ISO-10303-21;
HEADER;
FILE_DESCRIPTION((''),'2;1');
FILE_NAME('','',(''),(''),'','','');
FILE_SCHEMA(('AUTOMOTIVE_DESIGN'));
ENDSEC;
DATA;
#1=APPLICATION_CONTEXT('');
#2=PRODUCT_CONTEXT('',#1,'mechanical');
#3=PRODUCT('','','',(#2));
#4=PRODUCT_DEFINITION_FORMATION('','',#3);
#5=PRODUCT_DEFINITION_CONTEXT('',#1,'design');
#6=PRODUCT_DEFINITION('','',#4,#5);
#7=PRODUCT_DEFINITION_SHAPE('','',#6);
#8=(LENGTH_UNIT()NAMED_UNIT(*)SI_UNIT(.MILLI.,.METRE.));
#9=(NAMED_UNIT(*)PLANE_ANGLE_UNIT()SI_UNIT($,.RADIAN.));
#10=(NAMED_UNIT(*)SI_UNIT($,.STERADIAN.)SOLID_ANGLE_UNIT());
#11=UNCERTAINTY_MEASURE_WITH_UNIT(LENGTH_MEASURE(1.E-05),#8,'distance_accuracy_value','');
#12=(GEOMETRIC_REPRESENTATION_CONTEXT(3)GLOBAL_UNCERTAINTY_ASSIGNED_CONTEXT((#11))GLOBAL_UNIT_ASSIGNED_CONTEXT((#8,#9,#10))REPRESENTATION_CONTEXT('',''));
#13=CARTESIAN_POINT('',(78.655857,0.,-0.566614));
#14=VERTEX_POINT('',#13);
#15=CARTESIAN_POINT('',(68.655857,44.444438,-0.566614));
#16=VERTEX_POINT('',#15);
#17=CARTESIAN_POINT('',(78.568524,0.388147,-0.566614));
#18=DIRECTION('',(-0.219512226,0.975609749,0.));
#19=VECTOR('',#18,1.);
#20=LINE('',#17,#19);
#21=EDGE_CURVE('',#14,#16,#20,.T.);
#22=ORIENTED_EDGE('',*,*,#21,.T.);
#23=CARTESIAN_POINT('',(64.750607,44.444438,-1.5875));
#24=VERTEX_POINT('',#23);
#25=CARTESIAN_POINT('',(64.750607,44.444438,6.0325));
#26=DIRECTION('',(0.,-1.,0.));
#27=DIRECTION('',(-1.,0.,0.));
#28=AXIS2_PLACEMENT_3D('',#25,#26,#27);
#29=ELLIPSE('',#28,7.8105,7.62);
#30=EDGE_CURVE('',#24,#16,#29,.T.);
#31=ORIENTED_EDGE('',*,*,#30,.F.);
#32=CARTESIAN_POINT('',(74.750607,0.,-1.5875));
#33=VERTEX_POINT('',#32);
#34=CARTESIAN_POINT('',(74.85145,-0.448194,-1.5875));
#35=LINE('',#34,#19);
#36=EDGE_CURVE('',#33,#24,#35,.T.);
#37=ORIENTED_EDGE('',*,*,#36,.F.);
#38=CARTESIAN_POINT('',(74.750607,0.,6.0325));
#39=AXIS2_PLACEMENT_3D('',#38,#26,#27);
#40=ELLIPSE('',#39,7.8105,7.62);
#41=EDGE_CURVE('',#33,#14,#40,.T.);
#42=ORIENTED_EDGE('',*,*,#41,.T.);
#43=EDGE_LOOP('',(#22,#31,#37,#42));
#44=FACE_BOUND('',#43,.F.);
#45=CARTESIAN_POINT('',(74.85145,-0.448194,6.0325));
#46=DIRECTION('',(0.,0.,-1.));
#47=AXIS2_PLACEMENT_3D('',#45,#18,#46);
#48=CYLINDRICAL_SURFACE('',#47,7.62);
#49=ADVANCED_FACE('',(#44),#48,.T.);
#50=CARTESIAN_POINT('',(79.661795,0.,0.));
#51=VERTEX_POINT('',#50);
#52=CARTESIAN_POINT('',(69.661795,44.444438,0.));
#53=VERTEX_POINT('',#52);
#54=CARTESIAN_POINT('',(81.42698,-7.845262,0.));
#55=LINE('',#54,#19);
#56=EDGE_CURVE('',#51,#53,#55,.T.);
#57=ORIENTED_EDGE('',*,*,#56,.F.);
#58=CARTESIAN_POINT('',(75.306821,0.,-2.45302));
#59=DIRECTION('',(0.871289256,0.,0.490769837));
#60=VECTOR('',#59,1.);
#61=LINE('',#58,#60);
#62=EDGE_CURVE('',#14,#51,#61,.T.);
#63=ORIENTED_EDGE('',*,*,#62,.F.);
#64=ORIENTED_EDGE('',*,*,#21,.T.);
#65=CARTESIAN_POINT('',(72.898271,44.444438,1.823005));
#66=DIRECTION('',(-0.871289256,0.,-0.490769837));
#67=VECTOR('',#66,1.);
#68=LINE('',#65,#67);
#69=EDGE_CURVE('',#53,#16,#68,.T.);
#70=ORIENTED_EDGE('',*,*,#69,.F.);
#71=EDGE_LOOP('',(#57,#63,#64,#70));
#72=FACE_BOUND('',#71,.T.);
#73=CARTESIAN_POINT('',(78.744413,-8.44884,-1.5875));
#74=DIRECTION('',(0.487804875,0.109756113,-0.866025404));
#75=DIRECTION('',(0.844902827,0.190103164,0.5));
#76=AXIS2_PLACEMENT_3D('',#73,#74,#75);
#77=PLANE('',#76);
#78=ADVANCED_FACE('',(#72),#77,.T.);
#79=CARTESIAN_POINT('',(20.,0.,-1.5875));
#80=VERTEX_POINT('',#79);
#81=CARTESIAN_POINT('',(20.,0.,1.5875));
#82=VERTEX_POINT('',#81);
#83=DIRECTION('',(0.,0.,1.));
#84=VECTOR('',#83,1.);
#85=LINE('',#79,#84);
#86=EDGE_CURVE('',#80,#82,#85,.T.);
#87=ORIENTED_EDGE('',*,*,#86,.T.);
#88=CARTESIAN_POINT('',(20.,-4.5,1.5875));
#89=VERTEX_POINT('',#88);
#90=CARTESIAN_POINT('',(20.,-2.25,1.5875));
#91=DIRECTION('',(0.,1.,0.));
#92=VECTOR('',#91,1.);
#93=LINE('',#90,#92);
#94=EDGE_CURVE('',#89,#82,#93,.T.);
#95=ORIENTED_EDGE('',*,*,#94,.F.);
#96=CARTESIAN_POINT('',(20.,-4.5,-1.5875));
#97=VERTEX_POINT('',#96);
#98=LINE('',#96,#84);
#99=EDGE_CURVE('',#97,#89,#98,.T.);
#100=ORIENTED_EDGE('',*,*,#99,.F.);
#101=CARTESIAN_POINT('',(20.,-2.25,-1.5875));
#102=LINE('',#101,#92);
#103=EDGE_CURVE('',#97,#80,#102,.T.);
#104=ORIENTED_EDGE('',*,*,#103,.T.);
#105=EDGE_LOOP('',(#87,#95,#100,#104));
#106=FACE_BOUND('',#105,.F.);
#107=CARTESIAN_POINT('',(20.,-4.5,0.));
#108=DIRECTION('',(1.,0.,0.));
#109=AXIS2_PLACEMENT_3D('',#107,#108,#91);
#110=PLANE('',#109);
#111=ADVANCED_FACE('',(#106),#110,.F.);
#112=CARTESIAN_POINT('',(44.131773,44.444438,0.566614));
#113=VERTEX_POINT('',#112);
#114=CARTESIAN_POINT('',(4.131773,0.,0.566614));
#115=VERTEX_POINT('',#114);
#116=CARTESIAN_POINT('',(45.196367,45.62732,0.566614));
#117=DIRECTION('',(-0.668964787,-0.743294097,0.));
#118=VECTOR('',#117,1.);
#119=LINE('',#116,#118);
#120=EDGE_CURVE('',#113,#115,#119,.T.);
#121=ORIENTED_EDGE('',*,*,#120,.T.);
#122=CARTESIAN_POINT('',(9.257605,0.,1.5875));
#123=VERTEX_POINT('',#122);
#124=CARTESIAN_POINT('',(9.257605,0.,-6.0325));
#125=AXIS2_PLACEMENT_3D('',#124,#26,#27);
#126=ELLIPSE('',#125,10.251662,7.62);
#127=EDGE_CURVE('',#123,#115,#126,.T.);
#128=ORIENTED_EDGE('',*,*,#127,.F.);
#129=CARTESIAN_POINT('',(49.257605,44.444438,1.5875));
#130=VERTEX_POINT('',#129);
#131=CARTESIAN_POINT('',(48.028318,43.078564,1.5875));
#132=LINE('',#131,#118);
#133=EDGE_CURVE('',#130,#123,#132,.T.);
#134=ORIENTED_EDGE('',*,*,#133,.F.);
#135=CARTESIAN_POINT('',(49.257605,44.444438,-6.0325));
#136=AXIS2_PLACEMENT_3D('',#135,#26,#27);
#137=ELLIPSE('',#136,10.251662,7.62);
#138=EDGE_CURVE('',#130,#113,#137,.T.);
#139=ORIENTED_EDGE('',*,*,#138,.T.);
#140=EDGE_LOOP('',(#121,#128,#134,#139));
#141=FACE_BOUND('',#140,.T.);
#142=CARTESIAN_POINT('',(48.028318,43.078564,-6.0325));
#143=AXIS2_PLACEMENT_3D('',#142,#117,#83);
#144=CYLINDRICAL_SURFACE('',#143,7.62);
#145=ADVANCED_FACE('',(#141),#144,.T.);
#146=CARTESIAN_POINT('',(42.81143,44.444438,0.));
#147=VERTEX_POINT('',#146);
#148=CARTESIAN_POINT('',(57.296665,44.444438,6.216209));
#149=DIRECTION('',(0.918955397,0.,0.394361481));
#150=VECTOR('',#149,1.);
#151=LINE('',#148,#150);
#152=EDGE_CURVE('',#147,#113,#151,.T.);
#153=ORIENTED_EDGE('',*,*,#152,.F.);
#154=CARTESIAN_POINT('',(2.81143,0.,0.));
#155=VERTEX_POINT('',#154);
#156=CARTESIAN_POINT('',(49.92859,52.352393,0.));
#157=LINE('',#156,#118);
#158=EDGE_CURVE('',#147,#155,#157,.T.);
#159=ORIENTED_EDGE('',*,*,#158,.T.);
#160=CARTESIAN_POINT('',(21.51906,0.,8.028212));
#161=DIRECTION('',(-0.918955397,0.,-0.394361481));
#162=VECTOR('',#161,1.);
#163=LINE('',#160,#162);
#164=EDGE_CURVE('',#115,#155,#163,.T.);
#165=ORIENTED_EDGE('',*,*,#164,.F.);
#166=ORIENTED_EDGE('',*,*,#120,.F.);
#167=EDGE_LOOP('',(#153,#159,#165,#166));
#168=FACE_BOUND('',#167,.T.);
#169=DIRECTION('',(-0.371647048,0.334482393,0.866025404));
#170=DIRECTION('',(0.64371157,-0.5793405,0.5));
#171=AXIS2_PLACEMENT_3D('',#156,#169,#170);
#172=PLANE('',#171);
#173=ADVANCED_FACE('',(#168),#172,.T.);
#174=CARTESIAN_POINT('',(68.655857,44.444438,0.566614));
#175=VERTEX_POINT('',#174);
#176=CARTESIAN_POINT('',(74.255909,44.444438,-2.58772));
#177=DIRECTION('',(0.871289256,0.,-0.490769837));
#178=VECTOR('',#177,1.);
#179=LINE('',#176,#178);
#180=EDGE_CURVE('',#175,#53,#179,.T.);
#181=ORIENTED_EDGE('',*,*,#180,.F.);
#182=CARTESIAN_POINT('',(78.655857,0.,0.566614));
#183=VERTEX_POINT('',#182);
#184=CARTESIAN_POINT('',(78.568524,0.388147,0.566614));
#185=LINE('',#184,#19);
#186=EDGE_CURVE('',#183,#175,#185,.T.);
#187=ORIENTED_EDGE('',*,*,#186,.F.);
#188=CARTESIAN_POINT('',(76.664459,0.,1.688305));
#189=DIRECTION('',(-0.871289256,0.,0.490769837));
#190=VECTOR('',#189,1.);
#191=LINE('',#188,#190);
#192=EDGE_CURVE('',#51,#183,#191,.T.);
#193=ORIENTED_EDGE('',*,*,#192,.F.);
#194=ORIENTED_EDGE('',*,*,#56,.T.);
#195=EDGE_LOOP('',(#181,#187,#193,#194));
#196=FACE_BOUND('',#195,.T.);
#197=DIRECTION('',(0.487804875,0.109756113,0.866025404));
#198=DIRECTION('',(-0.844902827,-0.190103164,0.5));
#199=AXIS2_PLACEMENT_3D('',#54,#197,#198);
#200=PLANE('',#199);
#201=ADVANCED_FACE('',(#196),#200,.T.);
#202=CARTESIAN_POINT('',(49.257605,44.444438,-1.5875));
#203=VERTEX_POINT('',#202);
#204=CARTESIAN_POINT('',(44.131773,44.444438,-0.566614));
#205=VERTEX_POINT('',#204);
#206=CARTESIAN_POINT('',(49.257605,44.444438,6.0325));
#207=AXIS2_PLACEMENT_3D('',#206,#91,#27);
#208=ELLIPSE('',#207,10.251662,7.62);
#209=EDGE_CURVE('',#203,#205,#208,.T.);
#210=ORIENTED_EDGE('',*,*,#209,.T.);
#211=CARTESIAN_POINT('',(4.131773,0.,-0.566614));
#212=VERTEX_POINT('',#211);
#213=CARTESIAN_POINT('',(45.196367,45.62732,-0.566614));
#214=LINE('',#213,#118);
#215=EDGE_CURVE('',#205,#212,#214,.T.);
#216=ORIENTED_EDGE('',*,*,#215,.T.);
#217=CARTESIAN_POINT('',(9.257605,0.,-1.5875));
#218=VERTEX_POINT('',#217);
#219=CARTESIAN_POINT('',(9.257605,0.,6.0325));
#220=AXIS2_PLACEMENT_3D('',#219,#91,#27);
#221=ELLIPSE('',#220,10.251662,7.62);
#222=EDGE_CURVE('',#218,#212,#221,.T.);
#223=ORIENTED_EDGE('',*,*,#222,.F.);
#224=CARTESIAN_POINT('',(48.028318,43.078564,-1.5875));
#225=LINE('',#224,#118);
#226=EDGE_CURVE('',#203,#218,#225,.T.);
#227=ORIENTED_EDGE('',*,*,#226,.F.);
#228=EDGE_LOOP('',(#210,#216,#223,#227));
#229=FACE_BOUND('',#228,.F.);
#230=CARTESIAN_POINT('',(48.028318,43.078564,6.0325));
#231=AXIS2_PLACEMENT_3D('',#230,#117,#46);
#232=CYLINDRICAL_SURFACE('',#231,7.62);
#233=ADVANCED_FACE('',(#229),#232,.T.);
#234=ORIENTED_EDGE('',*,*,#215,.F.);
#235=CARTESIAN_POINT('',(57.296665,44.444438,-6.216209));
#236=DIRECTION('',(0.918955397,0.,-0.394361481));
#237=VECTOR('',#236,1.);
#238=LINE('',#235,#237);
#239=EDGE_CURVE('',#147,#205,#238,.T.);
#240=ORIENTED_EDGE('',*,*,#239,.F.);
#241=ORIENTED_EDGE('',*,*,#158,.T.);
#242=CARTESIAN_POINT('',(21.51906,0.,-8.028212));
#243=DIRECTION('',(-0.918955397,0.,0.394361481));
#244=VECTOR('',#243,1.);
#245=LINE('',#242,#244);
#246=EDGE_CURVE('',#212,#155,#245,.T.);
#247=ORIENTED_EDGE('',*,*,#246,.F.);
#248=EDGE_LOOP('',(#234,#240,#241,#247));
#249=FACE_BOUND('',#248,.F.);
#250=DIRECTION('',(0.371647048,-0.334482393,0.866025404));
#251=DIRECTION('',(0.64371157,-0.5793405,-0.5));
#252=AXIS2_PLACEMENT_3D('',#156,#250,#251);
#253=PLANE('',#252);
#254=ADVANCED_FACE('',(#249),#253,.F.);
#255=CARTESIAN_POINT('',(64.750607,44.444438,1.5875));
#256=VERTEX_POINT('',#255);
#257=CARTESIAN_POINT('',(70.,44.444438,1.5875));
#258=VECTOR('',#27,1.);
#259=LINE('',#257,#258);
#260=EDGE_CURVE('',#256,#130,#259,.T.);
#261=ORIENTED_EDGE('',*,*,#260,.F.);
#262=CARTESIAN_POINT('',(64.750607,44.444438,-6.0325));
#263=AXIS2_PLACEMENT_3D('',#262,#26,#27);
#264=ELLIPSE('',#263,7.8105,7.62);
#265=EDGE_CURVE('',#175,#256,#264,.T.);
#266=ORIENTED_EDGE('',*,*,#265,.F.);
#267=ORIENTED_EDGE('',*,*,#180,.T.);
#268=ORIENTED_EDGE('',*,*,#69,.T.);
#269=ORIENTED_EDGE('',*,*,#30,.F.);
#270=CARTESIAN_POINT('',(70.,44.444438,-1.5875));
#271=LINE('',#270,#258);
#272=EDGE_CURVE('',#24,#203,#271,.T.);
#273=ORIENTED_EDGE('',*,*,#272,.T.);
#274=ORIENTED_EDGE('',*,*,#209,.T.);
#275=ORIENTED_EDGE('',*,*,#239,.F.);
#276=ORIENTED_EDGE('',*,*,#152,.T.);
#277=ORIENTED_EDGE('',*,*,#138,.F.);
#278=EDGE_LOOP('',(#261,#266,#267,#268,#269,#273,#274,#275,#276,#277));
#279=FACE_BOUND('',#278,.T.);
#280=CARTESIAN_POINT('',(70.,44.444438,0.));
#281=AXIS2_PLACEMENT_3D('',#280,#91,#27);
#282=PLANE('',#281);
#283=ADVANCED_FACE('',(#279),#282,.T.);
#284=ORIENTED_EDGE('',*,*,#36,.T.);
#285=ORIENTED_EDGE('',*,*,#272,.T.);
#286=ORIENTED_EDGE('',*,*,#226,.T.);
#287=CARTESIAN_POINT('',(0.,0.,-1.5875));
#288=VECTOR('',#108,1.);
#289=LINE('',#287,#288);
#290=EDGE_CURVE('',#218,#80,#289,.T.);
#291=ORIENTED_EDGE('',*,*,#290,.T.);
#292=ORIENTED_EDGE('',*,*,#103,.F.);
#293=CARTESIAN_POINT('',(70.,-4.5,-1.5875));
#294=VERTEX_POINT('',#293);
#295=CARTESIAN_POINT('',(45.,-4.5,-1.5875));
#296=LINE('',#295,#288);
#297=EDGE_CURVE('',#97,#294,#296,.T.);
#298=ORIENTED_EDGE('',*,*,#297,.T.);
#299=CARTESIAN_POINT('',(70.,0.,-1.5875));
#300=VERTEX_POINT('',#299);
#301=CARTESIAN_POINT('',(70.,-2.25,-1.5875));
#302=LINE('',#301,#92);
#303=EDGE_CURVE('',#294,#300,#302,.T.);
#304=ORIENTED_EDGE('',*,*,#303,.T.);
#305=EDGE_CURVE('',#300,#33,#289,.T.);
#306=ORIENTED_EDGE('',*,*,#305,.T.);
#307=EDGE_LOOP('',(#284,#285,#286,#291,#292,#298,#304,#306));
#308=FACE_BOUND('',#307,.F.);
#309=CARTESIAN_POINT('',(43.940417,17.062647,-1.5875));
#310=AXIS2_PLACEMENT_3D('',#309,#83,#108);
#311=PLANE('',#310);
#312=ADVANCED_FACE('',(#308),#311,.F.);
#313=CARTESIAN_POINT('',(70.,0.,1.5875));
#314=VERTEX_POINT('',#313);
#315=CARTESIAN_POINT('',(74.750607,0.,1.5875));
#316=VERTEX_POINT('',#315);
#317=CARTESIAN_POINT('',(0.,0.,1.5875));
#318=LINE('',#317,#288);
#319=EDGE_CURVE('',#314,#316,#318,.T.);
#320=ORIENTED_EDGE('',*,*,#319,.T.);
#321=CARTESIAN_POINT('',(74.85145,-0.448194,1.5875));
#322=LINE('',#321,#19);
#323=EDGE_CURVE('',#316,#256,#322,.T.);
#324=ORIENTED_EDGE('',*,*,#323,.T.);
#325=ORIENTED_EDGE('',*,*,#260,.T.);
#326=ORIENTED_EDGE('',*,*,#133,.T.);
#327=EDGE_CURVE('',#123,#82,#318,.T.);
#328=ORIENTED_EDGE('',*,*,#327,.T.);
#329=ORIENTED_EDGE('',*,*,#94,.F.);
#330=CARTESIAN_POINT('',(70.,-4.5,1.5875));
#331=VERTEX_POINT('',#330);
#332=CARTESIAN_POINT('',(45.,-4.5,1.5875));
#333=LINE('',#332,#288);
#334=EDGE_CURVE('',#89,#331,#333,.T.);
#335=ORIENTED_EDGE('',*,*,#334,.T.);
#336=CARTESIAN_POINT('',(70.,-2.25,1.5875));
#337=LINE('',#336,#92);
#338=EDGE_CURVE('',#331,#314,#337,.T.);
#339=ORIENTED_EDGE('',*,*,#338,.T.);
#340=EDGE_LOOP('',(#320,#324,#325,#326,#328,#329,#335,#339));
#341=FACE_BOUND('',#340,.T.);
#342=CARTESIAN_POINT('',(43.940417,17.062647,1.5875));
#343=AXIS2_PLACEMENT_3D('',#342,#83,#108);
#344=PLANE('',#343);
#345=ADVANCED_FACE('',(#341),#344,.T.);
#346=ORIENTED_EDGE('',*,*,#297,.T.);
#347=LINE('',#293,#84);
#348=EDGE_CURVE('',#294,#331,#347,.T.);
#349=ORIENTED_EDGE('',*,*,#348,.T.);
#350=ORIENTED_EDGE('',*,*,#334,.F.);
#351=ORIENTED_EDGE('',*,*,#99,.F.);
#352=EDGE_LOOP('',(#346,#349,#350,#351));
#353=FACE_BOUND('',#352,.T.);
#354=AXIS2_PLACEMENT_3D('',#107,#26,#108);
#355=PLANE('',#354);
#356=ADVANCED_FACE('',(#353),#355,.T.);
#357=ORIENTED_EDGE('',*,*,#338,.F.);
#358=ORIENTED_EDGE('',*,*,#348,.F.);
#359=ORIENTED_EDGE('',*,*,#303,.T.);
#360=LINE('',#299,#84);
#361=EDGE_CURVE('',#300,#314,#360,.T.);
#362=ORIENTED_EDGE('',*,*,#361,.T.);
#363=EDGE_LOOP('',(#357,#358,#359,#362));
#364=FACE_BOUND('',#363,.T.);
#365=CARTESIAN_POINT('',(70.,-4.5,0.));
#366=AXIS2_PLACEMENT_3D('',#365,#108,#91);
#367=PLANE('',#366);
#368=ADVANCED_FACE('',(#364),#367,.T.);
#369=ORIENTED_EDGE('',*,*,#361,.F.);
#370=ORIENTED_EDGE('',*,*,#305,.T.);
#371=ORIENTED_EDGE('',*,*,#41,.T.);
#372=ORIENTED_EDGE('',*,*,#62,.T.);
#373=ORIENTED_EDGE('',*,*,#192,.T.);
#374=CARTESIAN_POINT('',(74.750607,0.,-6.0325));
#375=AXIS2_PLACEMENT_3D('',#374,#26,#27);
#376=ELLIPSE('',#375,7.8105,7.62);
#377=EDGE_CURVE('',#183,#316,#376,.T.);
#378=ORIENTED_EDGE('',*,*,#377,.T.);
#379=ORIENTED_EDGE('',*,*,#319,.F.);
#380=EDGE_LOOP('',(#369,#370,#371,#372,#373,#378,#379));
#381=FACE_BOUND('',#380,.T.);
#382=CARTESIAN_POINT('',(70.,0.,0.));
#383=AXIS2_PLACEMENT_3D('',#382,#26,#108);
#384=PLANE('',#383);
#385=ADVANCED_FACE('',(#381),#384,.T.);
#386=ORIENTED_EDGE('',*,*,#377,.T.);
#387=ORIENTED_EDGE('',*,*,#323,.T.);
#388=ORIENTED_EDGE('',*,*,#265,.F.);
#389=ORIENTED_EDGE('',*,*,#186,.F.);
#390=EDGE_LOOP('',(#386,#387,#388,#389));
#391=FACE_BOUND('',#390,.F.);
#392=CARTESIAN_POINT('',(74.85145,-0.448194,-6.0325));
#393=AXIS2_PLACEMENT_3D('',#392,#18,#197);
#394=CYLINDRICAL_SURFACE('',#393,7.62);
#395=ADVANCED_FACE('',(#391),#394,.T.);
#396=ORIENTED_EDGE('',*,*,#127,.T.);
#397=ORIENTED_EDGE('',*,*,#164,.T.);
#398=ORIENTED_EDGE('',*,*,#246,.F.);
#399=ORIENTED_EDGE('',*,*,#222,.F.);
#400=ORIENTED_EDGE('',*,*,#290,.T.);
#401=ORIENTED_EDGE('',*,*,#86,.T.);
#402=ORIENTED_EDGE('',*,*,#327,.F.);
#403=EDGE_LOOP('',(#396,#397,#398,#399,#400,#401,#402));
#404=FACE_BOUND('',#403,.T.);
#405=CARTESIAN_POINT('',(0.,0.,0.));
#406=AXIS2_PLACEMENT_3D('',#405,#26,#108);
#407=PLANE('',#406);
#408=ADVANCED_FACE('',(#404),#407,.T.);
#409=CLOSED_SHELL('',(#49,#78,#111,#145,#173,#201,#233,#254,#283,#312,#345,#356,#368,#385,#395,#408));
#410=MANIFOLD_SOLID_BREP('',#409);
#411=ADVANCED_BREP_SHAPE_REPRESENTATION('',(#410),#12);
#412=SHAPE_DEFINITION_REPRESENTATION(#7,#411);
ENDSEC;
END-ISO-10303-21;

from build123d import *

# Parameters (mm, degrees)
F0_W        = 50
F0_H        = 4.5
F1_DEPTH    = 1.5875
F2_T1_DEPTH = 84.8335063877
F3_T1_DEPTH = 61.4898569594
F4_R        = 7.62


# Not quite as in the source:
# - a fillet or chamfer that OpenCascade refuses, or shapes differently, is made with other operations: its cross-section is extruded or revolved along the edge and cut away or added


with BuildPart() as f1:
    # F0 (on Top) → F1 (new body, symmetric)
    with BuildSketch(Plane.XY):
        Polygon((40, 44.444437807), (0, 0), (20, 0), (70, 0), (80, 0), (70, 44.444437807), align=None)
        with Locations((45, -2.25)):
            Rectangle(F0_W, F0_H)
    extrude(amount=F1_DEPTH, both=True)

    # F2: chamfer of 2.794 x 4.8393499563 on 2 edges, made by hand

    # F2_s2 → F2_t1 (cut)
    with BuildSketch(Plane(origin=(48.3753142579, 53.7503411482, 0), x_dir=(0, 0, 1), z_dir=(-0.6689647868, -0.7432940966, 0))):
        Polygon((1.2065, 0), (-1.5875, -4.8393499563), (-1.5875, 0), align=None)
        Polygon((-1.2065, 0), (1.5875, -4.8393499563), (1.5875, 0), align=None)
    extrude(amount=F2_T1_DEPTH, mode=Mode.SUBTRACT)

    # F3: chamfer of 1.778 x 3.0795863359 on 2 edges, made by hand

    # F3_s2 → F3_t1 (cut)
    with BuildSketch(Plane(origin=(5.6037370993, -24.9054944995, 0), x_dir=(0, 0, 1), z_dir=(-0.2195122263, 0.9756097491, 0))):
        Polygon((-1.5875, 74.9691935903), (0.1905, 78.0487799262), (-1.5875, 78.0487799262), align=None)
        Polygon((-0.1905, 78.0487799262), (1.5875, 74.9691935903), (1.5875, 78.0487799262), align=None)
    extrude(amount=F3_T1_DEPTH, mode=Mode.SUBTRACT)

    # F4
    f4_edges = [f1.edges().sort_by_distance(p)[0] for p in [
        (26.51068, 22.222219, -1.5875),
        (71.843424, 22.222219, -1.5875),
        (71.843424, 22.222219, 1.5875),
        (26.51068, 22.222219, 1.5875),
    ]]
    fillet(f4_edges, radius=F4_R)


solid = f1.part
